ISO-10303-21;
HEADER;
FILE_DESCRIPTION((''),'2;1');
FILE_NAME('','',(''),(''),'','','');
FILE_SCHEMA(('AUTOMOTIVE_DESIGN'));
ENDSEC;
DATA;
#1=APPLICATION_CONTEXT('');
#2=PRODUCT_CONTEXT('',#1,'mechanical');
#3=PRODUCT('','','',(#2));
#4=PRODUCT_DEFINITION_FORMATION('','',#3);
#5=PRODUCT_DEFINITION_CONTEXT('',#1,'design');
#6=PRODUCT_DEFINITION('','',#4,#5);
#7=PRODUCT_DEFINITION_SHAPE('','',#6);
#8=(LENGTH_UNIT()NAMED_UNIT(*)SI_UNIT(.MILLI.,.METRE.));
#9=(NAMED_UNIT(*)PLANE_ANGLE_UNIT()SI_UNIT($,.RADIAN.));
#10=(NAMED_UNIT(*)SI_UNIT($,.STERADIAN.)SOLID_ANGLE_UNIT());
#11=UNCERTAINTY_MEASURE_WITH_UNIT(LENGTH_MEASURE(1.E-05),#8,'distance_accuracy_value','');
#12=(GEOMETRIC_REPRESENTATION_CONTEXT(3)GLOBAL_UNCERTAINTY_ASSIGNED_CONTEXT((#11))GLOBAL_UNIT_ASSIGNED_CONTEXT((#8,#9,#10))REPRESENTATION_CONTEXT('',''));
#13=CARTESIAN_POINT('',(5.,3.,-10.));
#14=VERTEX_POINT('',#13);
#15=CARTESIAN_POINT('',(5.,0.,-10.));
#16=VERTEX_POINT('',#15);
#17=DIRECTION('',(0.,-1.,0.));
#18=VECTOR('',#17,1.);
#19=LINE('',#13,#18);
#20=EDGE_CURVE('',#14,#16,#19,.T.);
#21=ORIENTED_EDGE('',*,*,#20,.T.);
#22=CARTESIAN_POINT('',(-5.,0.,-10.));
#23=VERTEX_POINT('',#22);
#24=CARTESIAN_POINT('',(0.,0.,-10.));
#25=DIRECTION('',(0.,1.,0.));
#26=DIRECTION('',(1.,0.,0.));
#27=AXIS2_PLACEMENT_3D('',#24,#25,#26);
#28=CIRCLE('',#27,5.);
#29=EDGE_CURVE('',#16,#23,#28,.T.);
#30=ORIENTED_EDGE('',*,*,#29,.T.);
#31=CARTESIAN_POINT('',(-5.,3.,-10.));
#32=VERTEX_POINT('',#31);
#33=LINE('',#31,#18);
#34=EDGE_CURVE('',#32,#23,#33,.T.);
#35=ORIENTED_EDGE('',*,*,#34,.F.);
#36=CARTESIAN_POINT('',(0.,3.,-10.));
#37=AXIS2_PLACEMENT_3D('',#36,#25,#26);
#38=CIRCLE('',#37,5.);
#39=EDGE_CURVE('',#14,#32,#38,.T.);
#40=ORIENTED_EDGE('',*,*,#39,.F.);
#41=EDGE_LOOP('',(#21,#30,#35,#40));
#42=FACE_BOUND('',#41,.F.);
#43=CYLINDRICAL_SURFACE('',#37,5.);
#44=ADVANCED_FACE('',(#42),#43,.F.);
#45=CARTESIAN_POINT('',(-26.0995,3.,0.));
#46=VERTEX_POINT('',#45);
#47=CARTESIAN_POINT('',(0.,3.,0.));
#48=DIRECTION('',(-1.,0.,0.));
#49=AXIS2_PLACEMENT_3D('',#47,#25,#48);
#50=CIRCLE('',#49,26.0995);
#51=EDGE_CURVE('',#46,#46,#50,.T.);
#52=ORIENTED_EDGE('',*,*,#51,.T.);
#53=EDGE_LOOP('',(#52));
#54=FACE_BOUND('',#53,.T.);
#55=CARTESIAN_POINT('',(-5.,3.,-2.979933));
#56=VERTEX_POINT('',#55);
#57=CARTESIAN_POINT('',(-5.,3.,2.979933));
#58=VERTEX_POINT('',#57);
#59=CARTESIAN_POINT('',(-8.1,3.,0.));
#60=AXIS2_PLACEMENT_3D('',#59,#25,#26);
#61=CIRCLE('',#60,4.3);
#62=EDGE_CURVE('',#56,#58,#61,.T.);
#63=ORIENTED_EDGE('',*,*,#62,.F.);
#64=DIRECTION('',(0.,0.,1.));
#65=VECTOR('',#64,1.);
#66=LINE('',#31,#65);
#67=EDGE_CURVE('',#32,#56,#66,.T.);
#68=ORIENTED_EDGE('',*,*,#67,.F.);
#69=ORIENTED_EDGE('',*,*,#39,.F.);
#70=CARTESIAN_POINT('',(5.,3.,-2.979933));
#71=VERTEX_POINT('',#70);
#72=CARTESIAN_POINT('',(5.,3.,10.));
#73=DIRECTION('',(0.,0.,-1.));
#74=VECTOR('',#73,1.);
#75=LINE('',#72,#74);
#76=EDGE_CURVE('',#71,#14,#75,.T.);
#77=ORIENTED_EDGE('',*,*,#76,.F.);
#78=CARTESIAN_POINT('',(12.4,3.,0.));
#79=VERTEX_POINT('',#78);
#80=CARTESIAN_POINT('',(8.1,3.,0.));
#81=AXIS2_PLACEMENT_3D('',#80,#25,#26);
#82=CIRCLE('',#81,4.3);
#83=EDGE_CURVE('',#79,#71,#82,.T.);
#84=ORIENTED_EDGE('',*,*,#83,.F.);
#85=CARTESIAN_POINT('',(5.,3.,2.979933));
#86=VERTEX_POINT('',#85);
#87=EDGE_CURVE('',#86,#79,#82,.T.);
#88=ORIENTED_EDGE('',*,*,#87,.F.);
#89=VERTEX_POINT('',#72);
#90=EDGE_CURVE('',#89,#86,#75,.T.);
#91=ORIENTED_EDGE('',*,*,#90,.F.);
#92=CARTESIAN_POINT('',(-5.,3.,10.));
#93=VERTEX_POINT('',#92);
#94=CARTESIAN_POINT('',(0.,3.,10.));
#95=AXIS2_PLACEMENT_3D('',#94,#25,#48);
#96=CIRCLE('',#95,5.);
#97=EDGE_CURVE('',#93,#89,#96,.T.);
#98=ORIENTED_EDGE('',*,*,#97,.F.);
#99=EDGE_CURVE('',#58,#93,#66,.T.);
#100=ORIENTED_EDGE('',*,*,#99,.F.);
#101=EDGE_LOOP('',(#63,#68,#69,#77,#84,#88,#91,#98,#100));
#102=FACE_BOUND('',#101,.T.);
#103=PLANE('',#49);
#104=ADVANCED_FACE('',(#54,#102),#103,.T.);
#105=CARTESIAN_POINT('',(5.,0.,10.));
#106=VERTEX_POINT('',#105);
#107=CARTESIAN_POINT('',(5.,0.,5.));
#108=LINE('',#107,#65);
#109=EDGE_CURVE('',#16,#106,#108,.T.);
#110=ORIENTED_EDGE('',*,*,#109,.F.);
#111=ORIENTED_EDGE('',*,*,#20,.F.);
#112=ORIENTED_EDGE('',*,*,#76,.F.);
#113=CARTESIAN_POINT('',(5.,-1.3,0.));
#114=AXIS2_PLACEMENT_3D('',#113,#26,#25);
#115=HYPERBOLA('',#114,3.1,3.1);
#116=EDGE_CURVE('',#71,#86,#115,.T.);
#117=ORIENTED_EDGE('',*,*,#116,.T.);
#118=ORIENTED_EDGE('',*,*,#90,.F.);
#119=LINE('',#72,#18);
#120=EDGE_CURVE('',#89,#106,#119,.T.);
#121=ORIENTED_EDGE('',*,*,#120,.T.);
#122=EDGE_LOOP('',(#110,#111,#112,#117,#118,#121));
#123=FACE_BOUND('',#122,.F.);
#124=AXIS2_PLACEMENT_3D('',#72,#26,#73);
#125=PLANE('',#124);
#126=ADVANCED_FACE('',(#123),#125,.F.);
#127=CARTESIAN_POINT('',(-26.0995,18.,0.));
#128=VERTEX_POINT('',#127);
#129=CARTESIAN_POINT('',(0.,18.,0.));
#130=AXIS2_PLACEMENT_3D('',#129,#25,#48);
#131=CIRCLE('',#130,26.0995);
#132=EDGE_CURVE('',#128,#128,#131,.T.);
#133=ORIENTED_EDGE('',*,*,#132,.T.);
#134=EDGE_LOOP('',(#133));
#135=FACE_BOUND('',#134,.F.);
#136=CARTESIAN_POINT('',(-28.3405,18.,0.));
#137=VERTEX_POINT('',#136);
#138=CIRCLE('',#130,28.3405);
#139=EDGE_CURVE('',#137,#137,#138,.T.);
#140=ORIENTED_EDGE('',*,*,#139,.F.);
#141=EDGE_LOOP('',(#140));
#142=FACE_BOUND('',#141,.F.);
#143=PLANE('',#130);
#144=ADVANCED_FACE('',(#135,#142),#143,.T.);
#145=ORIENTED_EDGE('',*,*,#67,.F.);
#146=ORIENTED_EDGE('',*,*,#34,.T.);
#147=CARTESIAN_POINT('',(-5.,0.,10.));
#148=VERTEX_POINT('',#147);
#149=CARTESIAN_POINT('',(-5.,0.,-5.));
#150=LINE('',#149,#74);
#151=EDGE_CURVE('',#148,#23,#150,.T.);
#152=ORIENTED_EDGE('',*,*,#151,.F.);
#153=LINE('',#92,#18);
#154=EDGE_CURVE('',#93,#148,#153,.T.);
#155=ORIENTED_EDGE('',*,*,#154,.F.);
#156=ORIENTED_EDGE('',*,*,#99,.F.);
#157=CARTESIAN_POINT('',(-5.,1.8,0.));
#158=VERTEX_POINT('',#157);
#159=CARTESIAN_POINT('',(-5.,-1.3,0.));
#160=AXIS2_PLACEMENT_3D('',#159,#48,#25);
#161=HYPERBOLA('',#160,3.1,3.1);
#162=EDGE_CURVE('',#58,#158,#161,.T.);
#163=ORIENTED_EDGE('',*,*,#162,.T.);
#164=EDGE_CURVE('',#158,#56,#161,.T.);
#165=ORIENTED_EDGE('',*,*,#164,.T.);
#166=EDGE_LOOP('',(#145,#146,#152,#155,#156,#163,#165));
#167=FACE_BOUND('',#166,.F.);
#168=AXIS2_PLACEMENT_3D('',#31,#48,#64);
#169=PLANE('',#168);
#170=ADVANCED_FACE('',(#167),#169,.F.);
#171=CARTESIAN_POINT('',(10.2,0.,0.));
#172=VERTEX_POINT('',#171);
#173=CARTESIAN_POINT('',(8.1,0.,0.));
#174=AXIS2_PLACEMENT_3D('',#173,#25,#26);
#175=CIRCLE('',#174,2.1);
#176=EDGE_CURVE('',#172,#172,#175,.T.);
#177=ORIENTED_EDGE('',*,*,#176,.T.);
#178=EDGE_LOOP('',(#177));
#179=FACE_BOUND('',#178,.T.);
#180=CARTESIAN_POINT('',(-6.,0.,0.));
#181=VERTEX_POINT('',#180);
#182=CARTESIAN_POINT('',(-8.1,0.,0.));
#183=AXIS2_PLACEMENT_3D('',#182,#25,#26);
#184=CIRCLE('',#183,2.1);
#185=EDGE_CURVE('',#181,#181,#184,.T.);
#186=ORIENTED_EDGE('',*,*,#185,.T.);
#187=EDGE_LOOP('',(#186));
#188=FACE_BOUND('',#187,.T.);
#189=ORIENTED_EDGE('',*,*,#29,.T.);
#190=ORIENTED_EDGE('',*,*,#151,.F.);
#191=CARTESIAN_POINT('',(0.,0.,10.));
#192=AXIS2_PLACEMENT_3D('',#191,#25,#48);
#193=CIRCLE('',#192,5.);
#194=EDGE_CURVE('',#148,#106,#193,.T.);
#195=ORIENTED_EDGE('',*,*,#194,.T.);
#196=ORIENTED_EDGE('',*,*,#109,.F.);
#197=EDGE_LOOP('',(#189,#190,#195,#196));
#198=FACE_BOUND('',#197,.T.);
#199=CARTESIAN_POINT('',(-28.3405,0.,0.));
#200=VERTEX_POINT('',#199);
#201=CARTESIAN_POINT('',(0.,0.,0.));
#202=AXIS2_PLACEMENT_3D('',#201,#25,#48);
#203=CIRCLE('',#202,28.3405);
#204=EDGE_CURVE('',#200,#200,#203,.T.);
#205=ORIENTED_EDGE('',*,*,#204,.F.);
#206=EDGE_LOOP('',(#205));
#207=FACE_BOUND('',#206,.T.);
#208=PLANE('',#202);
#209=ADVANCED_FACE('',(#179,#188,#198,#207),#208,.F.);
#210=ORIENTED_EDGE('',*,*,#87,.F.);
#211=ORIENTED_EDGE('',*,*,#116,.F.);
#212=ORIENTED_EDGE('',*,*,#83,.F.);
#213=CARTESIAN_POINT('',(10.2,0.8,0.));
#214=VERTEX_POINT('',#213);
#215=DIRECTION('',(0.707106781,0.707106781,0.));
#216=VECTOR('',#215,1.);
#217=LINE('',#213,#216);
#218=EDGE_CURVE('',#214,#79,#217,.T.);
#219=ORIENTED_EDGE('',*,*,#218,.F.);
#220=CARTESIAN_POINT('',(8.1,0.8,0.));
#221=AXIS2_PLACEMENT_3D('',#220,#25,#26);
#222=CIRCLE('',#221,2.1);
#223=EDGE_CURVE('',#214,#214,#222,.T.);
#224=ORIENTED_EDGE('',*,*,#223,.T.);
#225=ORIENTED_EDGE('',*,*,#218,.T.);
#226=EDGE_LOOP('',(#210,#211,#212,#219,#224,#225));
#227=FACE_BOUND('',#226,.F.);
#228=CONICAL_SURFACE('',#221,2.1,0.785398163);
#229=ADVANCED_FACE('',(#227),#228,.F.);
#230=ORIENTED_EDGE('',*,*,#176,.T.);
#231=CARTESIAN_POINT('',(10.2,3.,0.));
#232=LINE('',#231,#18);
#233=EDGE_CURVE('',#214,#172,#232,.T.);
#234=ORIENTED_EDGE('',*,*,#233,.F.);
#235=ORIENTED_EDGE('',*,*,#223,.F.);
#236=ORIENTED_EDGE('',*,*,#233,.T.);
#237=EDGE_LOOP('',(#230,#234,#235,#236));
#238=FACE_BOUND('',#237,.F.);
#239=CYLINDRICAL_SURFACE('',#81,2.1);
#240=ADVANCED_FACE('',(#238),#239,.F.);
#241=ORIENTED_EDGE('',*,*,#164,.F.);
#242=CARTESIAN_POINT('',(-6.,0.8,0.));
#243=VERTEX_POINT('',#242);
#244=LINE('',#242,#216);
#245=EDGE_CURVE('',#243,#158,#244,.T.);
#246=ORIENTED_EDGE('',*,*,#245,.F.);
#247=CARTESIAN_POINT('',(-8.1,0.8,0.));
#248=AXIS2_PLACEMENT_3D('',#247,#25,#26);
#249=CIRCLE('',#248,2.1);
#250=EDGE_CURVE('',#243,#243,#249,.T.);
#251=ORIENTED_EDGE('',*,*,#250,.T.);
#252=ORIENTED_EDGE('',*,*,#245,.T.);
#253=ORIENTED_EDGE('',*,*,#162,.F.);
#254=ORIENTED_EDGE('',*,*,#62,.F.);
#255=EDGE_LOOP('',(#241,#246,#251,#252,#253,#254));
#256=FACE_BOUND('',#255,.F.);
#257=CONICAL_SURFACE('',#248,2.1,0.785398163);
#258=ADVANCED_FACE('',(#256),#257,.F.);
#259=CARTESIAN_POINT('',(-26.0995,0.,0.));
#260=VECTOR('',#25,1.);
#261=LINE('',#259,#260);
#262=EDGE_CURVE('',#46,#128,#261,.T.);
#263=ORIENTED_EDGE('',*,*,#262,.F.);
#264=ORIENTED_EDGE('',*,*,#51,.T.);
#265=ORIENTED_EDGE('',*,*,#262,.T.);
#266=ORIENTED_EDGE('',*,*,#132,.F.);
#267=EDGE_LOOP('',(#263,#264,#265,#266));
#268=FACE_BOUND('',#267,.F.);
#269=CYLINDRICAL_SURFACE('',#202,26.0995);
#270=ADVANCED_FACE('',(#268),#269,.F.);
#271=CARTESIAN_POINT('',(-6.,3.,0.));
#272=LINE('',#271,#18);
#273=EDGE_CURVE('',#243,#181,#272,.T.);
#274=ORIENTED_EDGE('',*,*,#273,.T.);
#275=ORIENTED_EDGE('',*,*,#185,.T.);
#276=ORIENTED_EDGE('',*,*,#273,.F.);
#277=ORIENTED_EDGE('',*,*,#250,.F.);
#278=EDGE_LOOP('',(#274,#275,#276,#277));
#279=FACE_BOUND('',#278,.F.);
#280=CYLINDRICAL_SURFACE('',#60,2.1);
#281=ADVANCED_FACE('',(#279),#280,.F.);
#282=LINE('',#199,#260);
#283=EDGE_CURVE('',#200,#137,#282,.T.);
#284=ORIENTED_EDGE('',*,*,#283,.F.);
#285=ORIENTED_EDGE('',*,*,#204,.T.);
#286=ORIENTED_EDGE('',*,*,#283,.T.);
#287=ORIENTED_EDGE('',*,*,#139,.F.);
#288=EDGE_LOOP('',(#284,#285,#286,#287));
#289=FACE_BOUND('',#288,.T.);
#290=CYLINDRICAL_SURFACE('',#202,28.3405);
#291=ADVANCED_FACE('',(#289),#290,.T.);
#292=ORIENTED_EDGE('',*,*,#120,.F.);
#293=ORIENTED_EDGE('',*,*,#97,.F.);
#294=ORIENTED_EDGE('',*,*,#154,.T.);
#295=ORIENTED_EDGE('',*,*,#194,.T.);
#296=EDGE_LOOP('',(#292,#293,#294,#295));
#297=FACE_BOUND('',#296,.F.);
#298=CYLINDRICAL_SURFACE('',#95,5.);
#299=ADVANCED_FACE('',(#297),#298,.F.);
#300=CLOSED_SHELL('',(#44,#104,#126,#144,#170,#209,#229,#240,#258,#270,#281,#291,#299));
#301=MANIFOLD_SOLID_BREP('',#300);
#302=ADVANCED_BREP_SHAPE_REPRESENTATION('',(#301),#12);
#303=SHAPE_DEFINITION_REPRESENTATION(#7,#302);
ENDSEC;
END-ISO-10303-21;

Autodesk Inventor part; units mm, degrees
ref_plane "YZ Plane" through (0, 0, 0) normal (1, 0, 0) x (0, 1, 0)
ref_plane "XZ Plane" through (0, 0, 0) normal (0, 1, 0) x (-1, 0, 0)
ref_plane "XY Plane" through (0, 0, 0) normal (0, 0, 1) x (1, 0, 0)
sketch "Эскиз1" plane through (0, 0, 0) normal (0, 0, 1) x (1, 0, 0)
  line L0 (0, 0) -> (-28.3405, 0)
  line L1 (-28.3405, 0) -> (-28.3405, 3)
  line L2 (-28.3405, 3) -> (0, 3)
  line L3 (0, 3) -> (0, 0)
  line L4 (-28.3405, 0) -> (-26.0995, 0)
  line L5 (-26.0995, 0) -> (-26.0995, 18)
  line L6 (-26.0995, 18) -> (-28.3405, 18)
  line L7 (-28.3405, 18) -> (-28.3405, 0)
  line L8 (0, -3.6) -> (0, 21.6) projected
  point P0 (-26.0995, 3)
  dimension "d0" = 28.3405
  dimension "d1" = 3
  dimension "d2" = 2.241
  dimension "d3" = 18
revolve "Вращение1" add sketch "Эскиз1" angle 360 about axis through (0, -10, 0) along (0, 1, 0)
sketch "Эскиз2" plane through (0, 3, 0) normal (0, 1, 0) x (1, 0, 0)
  line L0 (0, 10) -> (0, -10) construction
  line L1 (-5, 10) -> (-5, -10)
  line L2 (5, -10) -> (5, 10)
  arc A0 (5, 10) -> (-5, 10) centre (0, 10) ccw
  arc A1 (-5, -10) -> (5, -10) centre (0, -10) ccw
  circle A2 centre (8.1, 0) radius 2.1
  circle A3 centre (-8.1, 0) radius 2.1
  point P0 (0, 0)
  dimension "d5" = 10
  dimension "d6" = 10
  dimension "d7" = 4.2
  dimension "d8" = 3.1
extrude "Выдавливание1" cut sketch "Эскиз2" against normal blind 10
chamfer "Фаска1" distance 2.2 angle 45 1 edges at (-10.2, 3, 0)
chamfer "Фаска2" distance 2.2 angle 45 1 edges at (6, 3, 0)
properties part number "кроватка"
